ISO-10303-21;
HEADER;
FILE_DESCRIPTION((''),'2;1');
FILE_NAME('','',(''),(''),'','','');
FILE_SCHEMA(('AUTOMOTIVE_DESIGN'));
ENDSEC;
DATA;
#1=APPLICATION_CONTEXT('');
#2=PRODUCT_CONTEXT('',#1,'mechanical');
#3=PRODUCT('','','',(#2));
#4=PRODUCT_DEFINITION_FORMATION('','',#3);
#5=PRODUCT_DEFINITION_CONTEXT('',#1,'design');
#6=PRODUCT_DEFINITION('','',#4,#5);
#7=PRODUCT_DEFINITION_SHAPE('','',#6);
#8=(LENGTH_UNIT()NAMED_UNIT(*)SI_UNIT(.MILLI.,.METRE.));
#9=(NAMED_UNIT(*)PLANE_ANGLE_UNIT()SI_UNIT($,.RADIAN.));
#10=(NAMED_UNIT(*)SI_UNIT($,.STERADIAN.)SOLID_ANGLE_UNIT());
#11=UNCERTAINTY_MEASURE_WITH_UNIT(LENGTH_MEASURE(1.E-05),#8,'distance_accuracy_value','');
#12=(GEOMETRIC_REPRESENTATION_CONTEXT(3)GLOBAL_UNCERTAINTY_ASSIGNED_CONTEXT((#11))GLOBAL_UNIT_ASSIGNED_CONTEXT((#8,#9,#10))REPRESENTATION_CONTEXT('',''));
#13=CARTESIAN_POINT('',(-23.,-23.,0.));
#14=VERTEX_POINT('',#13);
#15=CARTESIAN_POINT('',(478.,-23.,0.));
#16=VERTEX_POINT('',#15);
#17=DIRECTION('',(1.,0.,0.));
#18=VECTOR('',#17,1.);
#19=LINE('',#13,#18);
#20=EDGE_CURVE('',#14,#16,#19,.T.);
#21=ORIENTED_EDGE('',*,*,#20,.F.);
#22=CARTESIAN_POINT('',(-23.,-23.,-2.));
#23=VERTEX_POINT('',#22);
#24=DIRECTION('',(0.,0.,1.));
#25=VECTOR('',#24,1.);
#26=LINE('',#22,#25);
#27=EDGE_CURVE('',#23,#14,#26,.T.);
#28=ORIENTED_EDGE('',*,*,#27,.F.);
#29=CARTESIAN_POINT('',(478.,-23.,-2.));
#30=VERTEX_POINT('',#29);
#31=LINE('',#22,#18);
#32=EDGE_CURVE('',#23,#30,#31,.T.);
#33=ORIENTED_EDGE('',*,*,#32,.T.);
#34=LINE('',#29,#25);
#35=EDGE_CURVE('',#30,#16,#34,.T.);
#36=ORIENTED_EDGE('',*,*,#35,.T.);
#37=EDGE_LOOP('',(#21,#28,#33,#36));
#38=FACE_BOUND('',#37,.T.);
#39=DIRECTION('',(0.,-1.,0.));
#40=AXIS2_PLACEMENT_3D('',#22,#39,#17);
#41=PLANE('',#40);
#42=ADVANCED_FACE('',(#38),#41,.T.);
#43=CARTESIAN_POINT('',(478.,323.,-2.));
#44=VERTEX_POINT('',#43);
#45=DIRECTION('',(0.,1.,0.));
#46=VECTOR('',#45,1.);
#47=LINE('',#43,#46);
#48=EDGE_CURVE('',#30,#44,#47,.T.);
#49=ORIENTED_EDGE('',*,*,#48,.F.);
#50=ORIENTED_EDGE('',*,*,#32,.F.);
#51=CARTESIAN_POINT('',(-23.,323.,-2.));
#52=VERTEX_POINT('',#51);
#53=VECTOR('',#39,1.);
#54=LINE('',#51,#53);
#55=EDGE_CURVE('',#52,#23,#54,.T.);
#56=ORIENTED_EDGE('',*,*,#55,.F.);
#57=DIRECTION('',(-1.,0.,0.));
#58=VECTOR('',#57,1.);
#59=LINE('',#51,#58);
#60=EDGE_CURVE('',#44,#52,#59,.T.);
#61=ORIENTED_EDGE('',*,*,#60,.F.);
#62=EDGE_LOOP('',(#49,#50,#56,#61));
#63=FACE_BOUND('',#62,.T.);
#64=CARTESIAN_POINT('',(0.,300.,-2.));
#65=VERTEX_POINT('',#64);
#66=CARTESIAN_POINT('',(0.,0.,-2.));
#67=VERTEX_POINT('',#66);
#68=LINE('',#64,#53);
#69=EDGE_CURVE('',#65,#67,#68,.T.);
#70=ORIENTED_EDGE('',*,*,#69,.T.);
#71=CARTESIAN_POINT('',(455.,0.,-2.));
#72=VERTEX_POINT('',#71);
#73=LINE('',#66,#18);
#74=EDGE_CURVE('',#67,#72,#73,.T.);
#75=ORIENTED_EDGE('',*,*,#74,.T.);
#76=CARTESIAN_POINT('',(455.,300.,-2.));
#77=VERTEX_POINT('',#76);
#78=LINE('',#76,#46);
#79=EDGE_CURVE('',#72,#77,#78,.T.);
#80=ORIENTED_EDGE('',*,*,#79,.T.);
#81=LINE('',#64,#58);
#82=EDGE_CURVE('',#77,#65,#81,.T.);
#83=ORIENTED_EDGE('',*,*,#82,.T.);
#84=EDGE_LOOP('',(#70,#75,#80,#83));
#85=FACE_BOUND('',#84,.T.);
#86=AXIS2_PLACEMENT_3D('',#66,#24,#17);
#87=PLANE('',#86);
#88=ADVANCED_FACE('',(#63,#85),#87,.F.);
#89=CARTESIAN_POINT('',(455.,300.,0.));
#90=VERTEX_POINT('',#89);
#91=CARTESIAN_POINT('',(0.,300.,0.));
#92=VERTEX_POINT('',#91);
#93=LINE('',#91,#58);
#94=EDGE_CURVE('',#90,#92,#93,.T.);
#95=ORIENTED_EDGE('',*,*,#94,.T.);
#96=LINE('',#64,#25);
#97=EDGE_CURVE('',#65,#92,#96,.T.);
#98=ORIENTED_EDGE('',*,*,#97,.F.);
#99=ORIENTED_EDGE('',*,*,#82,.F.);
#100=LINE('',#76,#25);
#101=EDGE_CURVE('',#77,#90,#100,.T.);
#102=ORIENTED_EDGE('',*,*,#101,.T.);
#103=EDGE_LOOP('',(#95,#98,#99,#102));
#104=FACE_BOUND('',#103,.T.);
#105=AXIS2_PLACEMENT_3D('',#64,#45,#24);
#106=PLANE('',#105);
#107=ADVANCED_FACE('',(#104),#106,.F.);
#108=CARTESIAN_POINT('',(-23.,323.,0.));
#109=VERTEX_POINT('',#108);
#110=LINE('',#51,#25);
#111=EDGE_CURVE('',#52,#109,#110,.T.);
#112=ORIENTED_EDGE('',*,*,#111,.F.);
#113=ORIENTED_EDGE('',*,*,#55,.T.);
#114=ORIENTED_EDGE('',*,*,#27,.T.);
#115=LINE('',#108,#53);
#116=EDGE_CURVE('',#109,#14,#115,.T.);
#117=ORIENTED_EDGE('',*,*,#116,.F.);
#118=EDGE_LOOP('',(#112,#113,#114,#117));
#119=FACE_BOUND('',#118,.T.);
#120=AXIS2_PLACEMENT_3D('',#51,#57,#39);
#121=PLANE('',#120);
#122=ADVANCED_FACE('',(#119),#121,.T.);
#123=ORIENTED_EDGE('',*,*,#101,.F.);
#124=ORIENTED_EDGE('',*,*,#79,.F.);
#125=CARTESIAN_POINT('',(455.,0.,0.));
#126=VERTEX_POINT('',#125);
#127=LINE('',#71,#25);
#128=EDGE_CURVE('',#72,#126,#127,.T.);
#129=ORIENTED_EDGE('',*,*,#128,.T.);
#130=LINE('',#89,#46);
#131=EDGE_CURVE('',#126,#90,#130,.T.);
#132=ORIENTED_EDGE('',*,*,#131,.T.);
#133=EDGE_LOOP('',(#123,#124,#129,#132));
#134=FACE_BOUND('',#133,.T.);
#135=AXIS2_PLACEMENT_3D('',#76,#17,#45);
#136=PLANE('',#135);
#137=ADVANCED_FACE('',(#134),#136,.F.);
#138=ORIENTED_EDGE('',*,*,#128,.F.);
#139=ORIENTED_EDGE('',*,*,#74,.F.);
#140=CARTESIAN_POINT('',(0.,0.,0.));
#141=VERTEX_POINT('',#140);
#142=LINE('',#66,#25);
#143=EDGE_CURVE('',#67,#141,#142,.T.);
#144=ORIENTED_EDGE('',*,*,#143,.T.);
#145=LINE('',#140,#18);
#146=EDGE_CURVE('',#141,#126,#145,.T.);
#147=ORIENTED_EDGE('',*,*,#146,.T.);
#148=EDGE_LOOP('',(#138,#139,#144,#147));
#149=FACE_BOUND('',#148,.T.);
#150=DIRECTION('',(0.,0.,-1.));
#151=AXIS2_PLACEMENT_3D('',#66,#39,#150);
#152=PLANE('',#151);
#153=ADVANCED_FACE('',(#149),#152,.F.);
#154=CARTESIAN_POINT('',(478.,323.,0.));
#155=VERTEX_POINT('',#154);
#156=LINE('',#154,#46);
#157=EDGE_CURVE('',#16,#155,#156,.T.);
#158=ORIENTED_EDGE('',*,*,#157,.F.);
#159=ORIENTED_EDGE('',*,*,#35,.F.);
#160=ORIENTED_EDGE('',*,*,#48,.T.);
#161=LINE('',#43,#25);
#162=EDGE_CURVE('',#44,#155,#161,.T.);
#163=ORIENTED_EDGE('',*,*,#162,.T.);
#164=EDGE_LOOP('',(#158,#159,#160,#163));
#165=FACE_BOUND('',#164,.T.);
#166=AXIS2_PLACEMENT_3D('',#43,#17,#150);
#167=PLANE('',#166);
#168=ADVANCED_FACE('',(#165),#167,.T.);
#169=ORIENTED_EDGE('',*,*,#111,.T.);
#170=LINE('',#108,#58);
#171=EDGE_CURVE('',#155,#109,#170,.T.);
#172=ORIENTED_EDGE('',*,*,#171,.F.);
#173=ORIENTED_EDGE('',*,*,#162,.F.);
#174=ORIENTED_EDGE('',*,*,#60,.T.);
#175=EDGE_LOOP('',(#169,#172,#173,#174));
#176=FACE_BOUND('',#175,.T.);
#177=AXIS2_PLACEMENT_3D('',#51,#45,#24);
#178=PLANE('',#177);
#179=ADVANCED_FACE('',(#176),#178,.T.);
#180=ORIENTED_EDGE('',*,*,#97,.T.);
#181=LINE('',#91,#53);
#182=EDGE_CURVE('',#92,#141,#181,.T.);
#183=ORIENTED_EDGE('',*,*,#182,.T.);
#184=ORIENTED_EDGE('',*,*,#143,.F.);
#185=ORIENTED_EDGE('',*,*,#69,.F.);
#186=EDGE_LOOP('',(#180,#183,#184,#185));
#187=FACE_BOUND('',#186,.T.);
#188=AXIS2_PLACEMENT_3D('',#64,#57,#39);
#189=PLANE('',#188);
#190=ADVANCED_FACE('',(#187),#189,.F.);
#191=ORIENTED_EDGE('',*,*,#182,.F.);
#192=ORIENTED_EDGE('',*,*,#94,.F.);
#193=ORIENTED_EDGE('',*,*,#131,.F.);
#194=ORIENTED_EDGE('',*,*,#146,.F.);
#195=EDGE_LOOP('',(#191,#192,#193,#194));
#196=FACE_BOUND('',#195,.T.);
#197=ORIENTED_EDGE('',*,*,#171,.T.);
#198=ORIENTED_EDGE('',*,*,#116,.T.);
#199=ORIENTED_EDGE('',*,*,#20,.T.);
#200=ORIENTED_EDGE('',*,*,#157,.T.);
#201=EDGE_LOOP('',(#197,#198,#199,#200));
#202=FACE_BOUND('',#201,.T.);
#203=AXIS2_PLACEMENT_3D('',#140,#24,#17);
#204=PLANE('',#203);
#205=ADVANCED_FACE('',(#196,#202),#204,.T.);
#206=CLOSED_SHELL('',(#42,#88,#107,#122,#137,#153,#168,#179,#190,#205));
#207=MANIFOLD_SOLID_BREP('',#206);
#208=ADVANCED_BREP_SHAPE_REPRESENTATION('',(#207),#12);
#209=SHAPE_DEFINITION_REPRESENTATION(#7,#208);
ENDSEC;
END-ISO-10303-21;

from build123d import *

# Parameters (mm, degrees)
IZIM1_W            = 501
IZIM1_H            = 346
IZIM1_W_2          = 455
IZIM1_H_2          = 300
TABAN_FLAN_1_DEPTH = 2


# Sheet-metal steps are written as plain solids
with BuildPart() as part:
    # Çizim1 → Taban-Flanş1 (new body)
    with BuildSketch(Plane.XY):
        with Locations((227.5, 150)):
            Rectangle(IZIM1_W, IZIM1_H)
        with Locations((227.5, 150)):
            Rectangle(IZIM1_W_2, IZIM1_H_2, mode=Mode.SUBTRACT)
    extrude(amount=-TABAN_FLAN_1_DEPTH)


solid = part.part
